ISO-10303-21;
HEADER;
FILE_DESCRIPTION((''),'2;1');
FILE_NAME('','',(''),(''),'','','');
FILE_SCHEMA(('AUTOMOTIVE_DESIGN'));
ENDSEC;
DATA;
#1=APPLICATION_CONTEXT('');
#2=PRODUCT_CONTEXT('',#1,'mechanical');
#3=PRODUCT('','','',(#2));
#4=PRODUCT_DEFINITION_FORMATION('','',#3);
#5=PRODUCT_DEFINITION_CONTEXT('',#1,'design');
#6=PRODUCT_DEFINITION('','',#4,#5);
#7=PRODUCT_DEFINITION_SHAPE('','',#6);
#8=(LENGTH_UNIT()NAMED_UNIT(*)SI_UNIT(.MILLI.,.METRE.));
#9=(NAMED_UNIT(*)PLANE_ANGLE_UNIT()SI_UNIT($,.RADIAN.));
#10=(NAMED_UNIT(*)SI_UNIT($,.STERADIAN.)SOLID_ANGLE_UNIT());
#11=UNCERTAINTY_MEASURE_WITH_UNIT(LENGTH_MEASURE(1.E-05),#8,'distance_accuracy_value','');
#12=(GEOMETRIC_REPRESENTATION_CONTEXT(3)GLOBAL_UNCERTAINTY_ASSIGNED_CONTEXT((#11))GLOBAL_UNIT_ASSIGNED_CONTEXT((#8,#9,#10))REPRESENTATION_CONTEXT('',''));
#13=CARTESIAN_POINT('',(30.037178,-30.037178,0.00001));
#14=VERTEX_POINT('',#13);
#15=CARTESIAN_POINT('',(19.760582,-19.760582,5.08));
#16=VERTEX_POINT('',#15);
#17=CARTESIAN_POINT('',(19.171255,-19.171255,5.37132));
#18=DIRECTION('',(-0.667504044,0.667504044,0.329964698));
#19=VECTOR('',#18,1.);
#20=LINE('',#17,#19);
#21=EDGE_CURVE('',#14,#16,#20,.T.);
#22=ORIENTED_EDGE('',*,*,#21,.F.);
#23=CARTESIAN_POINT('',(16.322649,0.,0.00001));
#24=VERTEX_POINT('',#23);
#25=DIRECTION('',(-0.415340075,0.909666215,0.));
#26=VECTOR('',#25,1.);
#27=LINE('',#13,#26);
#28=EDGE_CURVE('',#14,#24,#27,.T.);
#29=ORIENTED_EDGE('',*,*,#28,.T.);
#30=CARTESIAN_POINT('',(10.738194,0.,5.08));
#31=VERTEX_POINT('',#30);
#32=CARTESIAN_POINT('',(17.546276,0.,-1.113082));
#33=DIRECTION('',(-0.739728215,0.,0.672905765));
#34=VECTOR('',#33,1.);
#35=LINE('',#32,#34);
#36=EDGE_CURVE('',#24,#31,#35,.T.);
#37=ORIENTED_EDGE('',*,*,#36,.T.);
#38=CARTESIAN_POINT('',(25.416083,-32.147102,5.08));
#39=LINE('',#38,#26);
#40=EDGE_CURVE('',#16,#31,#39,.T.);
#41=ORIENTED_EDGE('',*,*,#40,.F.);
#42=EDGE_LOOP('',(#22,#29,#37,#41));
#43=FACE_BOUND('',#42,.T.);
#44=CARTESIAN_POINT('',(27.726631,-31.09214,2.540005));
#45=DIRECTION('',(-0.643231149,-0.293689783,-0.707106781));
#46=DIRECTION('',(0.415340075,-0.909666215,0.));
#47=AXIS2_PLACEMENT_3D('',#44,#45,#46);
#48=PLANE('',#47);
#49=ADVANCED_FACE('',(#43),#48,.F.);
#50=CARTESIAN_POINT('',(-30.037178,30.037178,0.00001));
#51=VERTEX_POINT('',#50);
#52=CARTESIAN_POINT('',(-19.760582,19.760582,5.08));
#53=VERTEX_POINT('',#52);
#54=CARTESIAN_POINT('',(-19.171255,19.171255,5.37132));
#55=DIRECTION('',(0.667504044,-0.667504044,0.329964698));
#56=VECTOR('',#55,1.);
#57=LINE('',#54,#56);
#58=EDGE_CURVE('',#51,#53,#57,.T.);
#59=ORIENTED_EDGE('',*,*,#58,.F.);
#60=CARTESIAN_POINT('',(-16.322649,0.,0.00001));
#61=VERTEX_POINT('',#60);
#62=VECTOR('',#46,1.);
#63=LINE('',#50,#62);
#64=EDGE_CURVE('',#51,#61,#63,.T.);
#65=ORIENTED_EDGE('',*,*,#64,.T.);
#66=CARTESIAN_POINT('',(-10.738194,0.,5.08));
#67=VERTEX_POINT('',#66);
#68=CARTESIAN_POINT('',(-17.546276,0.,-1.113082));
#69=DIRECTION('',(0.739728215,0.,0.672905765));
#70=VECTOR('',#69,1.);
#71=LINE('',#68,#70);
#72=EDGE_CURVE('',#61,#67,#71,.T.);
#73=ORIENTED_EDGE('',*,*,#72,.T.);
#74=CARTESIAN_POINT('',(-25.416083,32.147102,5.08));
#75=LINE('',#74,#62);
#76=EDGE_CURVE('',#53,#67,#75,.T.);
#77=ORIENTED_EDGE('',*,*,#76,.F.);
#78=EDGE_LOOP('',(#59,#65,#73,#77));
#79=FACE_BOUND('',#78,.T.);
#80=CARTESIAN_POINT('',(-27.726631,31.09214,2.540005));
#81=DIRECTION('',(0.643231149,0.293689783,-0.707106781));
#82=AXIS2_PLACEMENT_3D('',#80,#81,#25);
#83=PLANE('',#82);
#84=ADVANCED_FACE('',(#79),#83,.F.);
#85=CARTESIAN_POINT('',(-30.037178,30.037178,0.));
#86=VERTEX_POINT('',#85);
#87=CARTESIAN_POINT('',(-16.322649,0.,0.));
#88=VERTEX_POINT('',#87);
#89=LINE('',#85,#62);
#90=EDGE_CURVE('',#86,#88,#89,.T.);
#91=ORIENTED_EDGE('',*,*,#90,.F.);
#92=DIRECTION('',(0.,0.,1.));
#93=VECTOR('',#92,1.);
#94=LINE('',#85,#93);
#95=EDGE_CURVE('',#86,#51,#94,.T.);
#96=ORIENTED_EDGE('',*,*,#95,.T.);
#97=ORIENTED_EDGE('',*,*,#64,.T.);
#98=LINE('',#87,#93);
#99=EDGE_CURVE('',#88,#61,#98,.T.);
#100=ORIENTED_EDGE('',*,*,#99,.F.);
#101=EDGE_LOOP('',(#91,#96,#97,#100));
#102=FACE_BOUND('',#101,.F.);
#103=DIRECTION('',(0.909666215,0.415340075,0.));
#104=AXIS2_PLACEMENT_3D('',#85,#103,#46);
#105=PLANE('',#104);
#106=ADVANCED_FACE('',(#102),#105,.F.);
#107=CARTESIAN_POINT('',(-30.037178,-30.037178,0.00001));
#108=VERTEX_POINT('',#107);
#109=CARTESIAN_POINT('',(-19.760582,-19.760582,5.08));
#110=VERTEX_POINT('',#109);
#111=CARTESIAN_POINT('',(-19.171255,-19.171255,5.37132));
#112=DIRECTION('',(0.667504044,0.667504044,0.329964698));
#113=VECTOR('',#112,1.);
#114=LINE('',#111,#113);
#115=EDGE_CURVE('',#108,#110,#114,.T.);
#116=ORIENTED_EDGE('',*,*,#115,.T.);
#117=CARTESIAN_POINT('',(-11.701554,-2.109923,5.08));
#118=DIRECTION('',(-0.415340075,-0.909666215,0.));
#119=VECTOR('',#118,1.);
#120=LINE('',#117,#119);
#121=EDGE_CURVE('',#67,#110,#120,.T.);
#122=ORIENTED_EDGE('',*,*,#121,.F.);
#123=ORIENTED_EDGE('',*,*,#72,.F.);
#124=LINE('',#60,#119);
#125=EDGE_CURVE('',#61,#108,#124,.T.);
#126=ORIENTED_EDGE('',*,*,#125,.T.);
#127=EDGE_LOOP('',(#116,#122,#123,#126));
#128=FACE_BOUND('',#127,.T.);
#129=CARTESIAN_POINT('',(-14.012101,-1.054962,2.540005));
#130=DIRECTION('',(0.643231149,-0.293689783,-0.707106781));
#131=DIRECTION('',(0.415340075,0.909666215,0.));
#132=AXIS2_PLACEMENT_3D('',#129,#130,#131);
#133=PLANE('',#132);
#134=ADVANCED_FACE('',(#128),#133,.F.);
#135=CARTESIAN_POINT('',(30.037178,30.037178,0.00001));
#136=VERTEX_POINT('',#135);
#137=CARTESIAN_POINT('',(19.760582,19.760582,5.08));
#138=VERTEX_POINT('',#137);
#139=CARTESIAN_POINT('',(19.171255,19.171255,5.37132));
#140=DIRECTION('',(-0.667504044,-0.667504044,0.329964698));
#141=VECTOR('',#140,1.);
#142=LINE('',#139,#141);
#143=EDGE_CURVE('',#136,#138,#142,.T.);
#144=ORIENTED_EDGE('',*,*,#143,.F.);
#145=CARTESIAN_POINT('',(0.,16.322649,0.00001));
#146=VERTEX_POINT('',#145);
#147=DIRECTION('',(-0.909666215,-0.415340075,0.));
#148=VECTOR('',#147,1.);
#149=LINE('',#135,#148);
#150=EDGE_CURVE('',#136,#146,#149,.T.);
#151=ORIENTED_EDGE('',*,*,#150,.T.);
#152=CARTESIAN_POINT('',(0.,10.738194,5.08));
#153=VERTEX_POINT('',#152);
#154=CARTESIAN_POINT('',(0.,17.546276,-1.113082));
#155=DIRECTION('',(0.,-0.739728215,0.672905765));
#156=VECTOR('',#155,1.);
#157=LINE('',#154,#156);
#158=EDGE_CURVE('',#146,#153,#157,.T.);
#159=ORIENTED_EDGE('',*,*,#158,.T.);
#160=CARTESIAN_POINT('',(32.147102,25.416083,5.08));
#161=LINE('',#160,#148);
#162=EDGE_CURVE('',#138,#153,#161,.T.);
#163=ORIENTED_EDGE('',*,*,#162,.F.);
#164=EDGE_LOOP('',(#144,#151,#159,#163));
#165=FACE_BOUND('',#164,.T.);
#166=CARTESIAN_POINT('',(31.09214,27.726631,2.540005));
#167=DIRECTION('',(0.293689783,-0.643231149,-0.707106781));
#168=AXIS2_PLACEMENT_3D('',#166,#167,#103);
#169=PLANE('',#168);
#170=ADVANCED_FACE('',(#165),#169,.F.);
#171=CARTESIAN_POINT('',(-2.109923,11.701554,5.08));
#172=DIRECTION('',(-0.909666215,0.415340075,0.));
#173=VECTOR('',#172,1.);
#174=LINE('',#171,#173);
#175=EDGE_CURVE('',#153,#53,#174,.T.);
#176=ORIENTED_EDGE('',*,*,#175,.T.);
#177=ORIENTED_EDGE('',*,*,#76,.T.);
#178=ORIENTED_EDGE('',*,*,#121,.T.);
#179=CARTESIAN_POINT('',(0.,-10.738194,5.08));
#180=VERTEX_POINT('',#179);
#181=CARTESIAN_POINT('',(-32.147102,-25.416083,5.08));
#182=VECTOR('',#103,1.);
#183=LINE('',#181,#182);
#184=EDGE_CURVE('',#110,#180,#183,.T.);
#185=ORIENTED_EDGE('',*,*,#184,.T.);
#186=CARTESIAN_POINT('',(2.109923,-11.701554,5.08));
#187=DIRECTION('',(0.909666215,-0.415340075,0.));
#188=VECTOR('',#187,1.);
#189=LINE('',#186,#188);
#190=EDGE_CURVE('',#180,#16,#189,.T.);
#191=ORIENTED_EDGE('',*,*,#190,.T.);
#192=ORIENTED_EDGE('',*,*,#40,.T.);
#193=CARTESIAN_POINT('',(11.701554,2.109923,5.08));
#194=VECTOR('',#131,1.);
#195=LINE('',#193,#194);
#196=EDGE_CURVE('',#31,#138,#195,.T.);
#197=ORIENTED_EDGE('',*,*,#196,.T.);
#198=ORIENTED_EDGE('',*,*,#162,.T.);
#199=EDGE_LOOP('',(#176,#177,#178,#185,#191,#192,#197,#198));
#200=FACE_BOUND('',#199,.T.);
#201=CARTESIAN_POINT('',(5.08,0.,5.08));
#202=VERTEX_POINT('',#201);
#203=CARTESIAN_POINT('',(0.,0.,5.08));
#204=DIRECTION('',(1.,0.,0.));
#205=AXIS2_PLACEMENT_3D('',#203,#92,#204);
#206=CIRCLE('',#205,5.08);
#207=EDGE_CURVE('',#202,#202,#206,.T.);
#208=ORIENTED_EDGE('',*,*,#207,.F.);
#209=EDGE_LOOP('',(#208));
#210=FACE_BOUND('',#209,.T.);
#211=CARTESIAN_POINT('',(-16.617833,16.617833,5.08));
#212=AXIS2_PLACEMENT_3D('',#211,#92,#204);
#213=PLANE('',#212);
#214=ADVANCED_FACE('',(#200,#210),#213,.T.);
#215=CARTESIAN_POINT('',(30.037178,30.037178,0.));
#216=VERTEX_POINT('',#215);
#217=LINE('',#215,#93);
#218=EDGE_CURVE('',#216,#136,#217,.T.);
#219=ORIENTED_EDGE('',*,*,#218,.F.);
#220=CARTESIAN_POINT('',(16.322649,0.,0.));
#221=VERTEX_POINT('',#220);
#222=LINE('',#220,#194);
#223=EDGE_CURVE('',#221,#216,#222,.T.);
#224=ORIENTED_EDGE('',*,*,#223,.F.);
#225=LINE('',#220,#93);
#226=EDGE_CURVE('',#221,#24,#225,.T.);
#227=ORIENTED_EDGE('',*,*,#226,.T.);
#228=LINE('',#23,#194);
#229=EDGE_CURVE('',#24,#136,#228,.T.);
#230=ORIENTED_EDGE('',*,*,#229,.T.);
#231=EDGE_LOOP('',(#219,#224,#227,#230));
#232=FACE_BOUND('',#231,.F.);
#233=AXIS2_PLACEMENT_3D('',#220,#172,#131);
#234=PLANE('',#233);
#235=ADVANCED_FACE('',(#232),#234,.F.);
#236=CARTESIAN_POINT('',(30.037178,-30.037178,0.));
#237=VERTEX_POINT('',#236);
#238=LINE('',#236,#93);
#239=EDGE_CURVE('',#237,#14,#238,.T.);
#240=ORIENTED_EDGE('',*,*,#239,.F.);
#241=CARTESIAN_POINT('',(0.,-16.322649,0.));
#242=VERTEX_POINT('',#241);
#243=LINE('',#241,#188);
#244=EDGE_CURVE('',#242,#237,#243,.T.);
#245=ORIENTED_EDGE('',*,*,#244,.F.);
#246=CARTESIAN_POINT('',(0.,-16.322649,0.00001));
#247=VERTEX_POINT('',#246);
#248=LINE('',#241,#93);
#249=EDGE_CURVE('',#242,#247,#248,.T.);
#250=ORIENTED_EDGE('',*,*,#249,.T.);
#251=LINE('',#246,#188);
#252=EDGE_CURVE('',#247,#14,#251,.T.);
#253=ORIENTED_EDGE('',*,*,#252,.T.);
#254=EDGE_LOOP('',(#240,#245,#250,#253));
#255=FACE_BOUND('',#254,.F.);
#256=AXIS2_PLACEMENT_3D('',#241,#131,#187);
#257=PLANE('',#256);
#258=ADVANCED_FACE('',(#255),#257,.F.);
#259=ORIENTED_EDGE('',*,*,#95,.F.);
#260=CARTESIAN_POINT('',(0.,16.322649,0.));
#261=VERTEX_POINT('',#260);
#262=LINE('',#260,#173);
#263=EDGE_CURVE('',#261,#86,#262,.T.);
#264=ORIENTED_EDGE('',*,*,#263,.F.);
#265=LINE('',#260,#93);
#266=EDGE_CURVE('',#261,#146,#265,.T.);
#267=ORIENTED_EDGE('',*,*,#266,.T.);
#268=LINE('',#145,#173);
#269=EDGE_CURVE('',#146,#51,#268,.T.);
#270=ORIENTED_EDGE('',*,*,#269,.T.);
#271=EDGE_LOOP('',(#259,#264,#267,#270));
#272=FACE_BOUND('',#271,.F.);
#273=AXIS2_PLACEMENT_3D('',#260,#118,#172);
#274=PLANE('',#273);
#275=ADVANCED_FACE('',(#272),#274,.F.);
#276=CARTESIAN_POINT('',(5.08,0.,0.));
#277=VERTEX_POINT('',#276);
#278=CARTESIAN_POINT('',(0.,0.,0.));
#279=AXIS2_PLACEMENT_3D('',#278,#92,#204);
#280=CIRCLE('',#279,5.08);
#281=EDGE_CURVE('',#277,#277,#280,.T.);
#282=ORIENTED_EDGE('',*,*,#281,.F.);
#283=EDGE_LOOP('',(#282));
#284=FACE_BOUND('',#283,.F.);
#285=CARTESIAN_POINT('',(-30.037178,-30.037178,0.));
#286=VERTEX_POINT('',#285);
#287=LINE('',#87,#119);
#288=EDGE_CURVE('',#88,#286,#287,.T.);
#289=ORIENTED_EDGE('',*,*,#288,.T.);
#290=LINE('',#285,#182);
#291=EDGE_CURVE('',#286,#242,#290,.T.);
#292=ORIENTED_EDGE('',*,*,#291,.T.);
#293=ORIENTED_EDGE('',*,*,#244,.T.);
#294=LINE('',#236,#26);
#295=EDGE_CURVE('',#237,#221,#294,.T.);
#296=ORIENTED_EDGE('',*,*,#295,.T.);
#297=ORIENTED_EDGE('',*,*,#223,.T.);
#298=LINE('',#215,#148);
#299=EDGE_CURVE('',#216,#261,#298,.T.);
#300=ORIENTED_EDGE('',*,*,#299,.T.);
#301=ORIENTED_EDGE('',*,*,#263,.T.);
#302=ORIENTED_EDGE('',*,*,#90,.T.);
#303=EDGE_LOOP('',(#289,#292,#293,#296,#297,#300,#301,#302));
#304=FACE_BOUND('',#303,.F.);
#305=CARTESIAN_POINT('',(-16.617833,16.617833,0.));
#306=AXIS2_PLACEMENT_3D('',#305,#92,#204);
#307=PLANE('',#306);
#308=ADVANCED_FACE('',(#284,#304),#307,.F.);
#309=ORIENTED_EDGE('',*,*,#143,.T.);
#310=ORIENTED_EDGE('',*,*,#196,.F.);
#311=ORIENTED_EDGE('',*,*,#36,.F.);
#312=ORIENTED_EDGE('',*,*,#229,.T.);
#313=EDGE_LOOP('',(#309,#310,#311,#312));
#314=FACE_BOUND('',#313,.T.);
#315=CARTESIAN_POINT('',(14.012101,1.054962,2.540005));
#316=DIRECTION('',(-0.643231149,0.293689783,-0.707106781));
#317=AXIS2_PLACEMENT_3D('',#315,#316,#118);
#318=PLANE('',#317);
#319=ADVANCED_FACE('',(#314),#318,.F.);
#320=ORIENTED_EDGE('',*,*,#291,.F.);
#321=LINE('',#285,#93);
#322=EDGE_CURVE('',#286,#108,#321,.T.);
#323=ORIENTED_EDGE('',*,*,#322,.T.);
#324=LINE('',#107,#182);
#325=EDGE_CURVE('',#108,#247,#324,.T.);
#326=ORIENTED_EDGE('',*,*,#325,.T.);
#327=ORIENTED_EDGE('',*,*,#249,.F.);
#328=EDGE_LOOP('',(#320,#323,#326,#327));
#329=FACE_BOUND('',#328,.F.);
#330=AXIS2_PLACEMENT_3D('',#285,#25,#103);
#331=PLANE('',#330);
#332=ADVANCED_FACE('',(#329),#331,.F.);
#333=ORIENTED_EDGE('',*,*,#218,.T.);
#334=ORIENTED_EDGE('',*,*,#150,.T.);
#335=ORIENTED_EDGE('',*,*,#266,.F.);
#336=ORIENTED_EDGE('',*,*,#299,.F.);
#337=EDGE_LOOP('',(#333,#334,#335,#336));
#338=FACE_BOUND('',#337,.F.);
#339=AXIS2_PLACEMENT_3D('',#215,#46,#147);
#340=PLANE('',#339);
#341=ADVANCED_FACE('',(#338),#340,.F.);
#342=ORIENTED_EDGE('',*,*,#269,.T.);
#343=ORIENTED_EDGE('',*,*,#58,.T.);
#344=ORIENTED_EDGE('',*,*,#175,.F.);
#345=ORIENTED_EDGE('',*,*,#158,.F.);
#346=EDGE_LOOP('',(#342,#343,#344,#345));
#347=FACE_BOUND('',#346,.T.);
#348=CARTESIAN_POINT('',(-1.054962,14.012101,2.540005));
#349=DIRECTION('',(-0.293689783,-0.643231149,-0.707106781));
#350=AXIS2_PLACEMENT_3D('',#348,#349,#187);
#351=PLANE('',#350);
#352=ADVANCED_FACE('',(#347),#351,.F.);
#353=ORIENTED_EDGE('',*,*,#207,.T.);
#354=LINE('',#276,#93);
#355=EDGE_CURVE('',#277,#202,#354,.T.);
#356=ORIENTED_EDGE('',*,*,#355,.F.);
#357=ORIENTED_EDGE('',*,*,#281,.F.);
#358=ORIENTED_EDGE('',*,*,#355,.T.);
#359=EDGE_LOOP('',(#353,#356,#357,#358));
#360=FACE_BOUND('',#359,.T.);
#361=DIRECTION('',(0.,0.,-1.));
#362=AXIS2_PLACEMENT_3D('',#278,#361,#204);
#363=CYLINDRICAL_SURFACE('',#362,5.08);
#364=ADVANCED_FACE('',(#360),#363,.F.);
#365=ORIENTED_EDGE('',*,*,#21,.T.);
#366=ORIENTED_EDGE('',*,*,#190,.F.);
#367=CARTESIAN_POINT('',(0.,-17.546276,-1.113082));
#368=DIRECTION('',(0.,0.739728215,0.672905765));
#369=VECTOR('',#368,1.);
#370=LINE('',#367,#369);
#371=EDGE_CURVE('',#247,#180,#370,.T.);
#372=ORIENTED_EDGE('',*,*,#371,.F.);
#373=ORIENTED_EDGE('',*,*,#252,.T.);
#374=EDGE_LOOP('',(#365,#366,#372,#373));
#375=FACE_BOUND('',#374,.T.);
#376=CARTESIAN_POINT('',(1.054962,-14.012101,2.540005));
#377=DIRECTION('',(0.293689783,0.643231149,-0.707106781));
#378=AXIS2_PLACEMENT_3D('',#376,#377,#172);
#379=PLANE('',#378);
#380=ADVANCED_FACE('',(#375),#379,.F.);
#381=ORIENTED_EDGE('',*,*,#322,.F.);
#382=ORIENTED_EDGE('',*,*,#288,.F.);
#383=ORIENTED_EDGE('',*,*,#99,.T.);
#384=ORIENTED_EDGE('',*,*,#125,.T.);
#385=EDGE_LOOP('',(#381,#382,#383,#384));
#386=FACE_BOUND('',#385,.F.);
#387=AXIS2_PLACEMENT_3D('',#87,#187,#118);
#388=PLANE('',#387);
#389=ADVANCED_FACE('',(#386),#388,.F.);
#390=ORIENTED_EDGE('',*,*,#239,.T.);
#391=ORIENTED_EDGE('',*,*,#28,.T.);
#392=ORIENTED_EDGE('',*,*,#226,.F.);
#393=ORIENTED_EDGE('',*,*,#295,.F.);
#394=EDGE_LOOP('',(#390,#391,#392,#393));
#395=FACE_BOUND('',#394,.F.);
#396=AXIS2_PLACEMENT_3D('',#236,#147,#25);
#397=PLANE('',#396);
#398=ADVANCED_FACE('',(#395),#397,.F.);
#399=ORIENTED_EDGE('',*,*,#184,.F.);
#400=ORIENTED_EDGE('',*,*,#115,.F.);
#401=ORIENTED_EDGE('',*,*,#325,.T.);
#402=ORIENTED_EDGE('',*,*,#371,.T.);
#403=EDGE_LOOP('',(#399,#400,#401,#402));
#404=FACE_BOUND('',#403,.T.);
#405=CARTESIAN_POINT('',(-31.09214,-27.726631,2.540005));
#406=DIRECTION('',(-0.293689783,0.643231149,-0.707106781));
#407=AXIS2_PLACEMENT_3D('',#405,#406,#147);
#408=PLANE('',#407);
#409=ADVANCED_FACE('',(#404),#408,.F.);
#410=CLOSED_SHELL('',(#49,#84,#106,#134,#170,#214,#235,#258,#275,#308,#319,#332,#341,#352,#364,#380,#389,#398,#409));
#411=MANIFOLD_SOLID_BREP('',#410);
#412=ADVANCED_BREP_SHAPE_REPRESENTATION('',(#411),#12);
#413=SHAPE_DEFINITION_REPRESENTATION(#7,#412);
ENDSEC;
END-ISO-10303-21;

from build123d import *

# Parameters (mm, degrees)
F0_R     = 5.08
F1_DEPTH = 5.08
F2_SIZE  = 5.07999


# Not quite as in the source:
# - a fillet or chamfer is up to 0.001 mm smaller than in the source, because OpenCascade refuses the exact size


with BuildPart() as f1:
    # F0 (on Top) → F1 (new body)
    with BuildSketch(Plane.XY):
        with BuildLine():
            ThreePointArc((-16.3226491362, 0), (-11.5418558911, 11.5418558911), (0, 16.3226491362))
            Line((0, 16.3226491362), (-30.0371784096, 30.0371784096))
            Line((-30.0371784096, 30.0371784096), (-16.3226491362, 0))
        make_face()
        with BuildLine():
            ThreePointArc((0, 16.3226491362), (11.5418558911, 11.5418558911), (16.3226491362, 0))
            Line((16.3226491362, 0), (30.0371784096, 30.0371784096))
            Line((30.0371784096, 30.0371784096), (0, 16.3226491362))
        make_face()
        with BuildLine():
            Line((30.0371784096, -30.0371784096), (16.3226491362, 0))
            ThreePointArc((16.3226491362, 0), (11.5418558911, -11.5418558911), (0, -16.3226491362))
            Line((0, -16.3226491362), (30.0371784096, -30.0371784096))
        make_face()
        with BuildLine():
            Line((-30.0371784096, -30.0371784096), (0, -16.3226491362))
            ThreePointArc((0, -16.3226491362), (-11.5418558911, -11.5418558911), (-16.3226491362, 0))
            Line((-16.3226491362, 0), (-30.0371784096, -30.0371784096))
        make_face()
        with BuildLine():
            ThreePointArc((0, -16.3226491362), (11.5418558911, -11.5418558911), (16.3226491362, 0))
            ThreePointArc((16.3226491362, 0), (11.5418558911, 11.5418558911), (0, 16.3226491362))
            ThreePointArc((0, 16.3226491362), (-11.5418558911, 11.5418558911), (-16.3226491362, 0))
            ThreePointArc((-16.3226491362, 0), (-11.5418558911, -11.5418558911), (0, -16.3226491362))
        make_face()
        Circle(F0_R, mode=Mode.SUBTRACT)
    extrude(amount=F1_DEPTH)

    # F2 (size 5.08 in the source; OpenCascade refuses exactly that, so slightly less here)
    f2_edges = [f1.edges().sort_by_distance(p)[0] for p in [
        (-15.018589, -23.179914, 5.08),
        (-23.179914, -15.018589, 5.08),
        (15.018589, -23.179914, 5.08),
        (23.179914, -15.018589, 5.08),
        (23.179914, 15.018589, 5.08),
        (15.018589, 23.179914, 5.08),
        (-15.018589, 23.179914, 5.08),
        (-23.179914, 15.018589, 5.08),
    ]]
    chamfer(f2_edges, length=F2_SIZE)


solid = f1.part
